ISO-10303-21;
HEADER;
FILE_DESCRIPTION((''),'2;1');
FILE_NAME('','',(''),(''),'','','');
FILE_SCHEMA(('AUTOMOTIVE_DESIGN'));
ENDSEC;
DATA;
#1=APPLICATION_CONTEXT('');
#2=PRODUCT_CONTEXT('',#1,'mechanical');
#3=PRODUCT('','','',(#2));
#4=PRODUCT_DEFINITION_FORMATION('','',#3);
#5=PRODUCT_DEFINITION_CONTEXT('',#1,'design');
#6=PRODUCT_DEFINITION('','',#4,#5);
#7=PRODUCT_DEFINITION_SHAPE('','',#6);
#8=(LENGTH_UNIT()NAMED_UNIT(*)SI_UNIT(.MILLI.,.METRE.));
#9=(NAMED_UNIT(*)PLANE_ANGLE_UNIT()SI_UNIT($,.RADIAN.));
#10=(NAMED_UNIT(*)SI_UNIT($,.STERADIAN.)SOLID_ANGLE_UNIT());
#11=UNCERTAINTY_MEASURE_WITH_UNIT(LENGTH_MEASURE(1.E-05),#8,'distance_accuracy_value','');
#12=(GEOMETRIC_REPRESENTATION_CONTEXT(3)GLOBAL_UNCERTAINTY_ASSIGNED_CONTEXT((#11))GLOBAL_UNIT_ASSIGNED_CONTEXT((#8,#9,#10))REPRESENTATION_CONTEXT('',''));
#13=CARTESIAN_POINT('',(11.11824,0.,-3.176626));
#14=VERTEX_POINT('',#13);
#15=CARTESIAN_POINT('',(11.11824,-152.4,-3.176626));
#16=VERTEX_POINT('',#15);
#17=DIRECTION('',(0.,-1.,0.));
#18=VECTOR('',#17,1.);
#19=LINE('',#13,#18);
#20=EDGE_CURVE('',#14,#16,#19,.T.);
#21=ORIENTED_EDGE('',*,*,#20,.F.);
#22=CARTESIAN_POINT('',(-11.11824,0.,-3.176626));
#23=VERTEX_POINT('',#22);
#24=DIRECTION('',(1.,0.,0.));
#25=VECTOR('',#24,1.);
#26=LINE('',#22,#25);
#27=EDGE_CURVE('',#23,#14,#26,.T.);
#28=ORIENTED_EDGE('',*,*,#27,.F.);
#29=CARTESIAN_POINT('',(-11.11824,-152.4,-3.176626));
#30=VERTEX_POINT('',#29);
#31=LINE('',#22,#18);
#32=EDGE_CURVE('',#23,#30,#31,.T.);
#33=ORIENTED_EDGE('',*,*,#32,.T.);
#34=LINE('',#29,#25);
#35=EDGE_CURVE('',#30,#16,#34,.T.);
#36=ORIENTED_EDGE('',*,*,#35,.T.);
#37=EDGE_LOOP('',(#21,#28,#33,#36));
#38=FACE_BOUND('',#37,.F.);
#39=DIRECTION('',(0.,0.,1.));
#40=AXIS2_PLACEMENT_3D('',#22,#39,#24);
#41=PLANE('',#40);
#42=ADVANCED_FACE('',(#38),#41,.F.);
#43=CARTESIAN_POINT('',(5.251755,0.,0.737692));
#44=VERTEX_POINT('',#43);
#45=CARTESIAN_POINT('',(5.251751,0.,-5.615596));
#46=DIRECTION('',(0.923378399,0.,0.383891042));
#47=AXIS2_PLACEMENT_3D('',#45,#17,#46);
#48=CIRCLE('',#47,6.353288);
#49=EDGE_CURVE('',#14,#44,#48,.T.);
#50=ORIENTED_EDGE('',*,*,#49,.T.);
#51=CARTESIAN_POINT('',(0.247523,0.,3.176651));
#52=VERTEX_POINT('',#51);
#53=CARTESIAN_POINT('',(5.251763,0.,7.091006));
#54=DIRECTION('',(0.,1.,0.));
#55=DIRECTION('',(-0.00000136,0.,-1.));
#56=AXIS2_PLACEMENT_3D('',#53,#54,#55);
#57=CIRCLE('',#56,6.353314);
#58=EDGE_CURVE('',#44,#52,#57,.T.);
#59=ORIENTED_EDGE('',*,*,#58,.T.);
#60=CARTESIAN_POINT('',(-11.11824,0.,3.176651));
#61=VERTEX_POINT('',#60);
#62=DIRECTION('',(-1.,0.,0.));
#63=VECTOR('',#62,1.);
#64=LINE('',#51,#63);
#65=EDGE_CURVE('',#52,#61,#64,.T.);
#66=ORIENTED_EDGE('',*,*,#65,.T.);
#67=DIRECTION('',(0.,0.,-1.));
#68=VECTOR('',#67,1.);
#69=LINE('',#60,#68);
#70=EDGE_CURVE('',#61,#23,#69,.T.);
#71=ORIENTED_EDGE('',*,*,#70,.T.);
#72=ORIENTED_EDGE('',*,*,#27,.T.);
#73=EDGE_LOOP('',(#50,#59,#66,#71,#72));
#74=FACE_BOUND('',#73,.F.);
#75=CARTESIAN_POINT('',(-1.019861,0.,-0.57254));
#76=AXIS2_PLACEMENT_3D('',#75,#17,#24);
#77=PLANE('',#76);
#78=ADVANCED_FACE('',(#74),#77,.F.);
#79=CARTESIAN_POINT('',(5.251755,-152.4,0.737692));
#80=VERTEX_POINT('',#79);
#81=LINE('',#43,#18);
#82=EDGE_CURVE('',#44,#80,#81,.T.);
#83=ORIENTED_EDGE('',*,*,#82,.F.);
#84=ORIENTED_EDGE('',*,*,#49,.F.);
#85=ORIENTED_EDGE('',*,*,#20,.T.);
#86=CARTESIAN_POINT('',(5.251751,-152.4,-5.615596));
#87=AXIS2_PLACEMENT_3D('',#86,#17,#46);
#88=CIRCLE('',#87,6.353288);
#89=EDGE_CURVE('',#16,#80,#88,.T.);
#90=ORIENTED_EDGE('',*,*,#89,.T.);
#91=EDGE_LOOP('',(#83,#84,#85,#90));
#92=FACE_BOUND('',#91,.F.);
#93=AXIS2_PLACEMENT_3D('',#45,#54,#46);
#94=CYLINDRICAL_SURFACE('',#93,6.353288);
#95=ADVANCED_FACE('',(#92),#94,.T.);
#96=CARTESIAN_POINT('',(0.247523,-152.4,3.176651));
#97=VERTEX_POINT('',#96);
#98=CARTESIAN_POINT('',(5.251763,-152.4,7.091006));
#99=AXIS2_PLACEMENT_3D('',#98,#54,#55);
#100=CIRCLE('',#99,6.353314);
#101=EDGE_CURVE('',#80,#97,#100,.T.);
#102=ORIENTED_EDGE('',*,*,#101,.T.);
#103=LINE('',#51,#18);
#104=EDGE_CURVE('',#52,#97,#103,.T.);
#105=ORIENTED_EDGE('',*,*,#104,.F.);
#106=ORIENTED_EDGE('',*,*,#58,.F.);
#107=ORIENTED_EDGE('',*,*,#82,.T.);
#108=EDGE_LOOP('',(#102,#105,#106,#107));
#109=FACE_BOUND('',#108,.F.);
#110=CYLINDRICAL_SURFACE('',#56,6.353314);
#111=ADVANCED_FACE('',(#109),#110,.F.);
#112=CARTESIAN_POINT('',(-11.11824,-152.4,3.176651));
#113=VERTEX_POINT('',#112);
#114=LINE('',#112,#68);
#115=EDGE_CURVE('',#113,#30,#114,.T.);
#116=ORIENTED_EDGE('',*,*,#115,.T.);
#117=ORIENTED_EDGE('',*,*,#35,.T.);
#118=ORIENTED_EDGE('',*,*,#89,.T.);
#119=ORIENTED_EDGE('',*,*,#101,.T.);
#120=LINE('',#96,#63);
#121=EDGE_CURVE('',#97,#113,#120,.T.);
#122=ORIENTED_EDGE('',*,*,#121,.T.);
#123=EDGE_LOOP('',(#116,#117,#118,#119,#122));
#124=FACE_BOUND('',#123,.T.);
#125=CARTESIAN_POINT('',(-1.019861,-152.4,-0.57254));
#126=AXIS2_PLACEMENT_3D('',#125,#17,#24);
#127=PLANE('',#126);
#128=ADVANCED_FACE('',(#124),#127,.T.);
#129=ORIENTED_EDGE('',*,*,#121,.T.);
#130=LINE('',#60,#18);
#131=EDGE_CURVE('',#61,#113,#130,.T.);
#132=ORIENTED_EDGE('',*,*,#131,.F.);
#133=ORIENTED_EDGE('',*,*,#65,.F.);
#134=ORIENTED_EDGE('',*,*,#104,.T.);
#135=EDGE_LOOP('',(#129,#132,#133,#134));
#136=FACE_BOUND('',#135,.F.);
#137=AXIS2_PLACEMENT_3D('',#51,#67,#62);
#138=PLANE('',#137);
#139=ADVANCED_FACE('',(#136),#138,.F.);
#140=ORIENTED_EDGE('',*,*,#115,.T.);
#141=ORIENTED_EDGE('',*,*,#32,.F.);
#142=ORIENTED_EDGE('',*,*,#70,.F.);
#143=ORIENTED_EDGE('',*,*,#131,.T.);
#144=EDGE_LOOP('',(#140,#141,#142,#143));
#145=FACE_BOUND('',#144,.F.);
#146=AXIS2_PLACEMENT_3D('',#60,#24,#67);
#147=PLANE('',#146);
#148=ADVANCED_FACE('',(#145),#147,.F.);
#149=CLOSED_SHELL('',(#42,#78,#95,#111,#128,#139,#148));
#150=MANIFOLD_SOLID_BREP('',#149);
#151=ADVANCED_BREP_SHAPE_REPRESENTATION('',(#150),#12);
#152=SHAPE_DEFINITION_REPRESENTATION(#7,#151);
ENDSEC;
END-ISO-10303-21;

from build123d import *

# Parameters (mm, degrees)
F1_DEPTH = 152.4


# Not quite as in the source:
# - ends of sketch curves that miss each other by under 0.0002 mm in the source are joined


with BuildPart() as f1:
    # F0 (on Front) → F1 (new body)
    with BuildSketch(Plane.XZ):
        with BuildLine():
            Line((0.247523, 3.176651), (-11.1182404, 3.176651))
            Line((-11.1182404, 3.176651), (-11.1182404, -3.1766256))
            Line((-11.1182404, -3.1766256), (11.1182404, -3.1766256))
            ThreePointArc((11.1182404, -3.1766256), (8.7779959458, -0.3307242374), (5.2517548, 0.7376922))
            ThreePointArc((5.2517548, 0.7376922), (2.4682848878, 1.3798901975), (0.247523, 3.176651))
        make_face()
    extrude(amount=F1_DEPTH)


solid = f1.part
